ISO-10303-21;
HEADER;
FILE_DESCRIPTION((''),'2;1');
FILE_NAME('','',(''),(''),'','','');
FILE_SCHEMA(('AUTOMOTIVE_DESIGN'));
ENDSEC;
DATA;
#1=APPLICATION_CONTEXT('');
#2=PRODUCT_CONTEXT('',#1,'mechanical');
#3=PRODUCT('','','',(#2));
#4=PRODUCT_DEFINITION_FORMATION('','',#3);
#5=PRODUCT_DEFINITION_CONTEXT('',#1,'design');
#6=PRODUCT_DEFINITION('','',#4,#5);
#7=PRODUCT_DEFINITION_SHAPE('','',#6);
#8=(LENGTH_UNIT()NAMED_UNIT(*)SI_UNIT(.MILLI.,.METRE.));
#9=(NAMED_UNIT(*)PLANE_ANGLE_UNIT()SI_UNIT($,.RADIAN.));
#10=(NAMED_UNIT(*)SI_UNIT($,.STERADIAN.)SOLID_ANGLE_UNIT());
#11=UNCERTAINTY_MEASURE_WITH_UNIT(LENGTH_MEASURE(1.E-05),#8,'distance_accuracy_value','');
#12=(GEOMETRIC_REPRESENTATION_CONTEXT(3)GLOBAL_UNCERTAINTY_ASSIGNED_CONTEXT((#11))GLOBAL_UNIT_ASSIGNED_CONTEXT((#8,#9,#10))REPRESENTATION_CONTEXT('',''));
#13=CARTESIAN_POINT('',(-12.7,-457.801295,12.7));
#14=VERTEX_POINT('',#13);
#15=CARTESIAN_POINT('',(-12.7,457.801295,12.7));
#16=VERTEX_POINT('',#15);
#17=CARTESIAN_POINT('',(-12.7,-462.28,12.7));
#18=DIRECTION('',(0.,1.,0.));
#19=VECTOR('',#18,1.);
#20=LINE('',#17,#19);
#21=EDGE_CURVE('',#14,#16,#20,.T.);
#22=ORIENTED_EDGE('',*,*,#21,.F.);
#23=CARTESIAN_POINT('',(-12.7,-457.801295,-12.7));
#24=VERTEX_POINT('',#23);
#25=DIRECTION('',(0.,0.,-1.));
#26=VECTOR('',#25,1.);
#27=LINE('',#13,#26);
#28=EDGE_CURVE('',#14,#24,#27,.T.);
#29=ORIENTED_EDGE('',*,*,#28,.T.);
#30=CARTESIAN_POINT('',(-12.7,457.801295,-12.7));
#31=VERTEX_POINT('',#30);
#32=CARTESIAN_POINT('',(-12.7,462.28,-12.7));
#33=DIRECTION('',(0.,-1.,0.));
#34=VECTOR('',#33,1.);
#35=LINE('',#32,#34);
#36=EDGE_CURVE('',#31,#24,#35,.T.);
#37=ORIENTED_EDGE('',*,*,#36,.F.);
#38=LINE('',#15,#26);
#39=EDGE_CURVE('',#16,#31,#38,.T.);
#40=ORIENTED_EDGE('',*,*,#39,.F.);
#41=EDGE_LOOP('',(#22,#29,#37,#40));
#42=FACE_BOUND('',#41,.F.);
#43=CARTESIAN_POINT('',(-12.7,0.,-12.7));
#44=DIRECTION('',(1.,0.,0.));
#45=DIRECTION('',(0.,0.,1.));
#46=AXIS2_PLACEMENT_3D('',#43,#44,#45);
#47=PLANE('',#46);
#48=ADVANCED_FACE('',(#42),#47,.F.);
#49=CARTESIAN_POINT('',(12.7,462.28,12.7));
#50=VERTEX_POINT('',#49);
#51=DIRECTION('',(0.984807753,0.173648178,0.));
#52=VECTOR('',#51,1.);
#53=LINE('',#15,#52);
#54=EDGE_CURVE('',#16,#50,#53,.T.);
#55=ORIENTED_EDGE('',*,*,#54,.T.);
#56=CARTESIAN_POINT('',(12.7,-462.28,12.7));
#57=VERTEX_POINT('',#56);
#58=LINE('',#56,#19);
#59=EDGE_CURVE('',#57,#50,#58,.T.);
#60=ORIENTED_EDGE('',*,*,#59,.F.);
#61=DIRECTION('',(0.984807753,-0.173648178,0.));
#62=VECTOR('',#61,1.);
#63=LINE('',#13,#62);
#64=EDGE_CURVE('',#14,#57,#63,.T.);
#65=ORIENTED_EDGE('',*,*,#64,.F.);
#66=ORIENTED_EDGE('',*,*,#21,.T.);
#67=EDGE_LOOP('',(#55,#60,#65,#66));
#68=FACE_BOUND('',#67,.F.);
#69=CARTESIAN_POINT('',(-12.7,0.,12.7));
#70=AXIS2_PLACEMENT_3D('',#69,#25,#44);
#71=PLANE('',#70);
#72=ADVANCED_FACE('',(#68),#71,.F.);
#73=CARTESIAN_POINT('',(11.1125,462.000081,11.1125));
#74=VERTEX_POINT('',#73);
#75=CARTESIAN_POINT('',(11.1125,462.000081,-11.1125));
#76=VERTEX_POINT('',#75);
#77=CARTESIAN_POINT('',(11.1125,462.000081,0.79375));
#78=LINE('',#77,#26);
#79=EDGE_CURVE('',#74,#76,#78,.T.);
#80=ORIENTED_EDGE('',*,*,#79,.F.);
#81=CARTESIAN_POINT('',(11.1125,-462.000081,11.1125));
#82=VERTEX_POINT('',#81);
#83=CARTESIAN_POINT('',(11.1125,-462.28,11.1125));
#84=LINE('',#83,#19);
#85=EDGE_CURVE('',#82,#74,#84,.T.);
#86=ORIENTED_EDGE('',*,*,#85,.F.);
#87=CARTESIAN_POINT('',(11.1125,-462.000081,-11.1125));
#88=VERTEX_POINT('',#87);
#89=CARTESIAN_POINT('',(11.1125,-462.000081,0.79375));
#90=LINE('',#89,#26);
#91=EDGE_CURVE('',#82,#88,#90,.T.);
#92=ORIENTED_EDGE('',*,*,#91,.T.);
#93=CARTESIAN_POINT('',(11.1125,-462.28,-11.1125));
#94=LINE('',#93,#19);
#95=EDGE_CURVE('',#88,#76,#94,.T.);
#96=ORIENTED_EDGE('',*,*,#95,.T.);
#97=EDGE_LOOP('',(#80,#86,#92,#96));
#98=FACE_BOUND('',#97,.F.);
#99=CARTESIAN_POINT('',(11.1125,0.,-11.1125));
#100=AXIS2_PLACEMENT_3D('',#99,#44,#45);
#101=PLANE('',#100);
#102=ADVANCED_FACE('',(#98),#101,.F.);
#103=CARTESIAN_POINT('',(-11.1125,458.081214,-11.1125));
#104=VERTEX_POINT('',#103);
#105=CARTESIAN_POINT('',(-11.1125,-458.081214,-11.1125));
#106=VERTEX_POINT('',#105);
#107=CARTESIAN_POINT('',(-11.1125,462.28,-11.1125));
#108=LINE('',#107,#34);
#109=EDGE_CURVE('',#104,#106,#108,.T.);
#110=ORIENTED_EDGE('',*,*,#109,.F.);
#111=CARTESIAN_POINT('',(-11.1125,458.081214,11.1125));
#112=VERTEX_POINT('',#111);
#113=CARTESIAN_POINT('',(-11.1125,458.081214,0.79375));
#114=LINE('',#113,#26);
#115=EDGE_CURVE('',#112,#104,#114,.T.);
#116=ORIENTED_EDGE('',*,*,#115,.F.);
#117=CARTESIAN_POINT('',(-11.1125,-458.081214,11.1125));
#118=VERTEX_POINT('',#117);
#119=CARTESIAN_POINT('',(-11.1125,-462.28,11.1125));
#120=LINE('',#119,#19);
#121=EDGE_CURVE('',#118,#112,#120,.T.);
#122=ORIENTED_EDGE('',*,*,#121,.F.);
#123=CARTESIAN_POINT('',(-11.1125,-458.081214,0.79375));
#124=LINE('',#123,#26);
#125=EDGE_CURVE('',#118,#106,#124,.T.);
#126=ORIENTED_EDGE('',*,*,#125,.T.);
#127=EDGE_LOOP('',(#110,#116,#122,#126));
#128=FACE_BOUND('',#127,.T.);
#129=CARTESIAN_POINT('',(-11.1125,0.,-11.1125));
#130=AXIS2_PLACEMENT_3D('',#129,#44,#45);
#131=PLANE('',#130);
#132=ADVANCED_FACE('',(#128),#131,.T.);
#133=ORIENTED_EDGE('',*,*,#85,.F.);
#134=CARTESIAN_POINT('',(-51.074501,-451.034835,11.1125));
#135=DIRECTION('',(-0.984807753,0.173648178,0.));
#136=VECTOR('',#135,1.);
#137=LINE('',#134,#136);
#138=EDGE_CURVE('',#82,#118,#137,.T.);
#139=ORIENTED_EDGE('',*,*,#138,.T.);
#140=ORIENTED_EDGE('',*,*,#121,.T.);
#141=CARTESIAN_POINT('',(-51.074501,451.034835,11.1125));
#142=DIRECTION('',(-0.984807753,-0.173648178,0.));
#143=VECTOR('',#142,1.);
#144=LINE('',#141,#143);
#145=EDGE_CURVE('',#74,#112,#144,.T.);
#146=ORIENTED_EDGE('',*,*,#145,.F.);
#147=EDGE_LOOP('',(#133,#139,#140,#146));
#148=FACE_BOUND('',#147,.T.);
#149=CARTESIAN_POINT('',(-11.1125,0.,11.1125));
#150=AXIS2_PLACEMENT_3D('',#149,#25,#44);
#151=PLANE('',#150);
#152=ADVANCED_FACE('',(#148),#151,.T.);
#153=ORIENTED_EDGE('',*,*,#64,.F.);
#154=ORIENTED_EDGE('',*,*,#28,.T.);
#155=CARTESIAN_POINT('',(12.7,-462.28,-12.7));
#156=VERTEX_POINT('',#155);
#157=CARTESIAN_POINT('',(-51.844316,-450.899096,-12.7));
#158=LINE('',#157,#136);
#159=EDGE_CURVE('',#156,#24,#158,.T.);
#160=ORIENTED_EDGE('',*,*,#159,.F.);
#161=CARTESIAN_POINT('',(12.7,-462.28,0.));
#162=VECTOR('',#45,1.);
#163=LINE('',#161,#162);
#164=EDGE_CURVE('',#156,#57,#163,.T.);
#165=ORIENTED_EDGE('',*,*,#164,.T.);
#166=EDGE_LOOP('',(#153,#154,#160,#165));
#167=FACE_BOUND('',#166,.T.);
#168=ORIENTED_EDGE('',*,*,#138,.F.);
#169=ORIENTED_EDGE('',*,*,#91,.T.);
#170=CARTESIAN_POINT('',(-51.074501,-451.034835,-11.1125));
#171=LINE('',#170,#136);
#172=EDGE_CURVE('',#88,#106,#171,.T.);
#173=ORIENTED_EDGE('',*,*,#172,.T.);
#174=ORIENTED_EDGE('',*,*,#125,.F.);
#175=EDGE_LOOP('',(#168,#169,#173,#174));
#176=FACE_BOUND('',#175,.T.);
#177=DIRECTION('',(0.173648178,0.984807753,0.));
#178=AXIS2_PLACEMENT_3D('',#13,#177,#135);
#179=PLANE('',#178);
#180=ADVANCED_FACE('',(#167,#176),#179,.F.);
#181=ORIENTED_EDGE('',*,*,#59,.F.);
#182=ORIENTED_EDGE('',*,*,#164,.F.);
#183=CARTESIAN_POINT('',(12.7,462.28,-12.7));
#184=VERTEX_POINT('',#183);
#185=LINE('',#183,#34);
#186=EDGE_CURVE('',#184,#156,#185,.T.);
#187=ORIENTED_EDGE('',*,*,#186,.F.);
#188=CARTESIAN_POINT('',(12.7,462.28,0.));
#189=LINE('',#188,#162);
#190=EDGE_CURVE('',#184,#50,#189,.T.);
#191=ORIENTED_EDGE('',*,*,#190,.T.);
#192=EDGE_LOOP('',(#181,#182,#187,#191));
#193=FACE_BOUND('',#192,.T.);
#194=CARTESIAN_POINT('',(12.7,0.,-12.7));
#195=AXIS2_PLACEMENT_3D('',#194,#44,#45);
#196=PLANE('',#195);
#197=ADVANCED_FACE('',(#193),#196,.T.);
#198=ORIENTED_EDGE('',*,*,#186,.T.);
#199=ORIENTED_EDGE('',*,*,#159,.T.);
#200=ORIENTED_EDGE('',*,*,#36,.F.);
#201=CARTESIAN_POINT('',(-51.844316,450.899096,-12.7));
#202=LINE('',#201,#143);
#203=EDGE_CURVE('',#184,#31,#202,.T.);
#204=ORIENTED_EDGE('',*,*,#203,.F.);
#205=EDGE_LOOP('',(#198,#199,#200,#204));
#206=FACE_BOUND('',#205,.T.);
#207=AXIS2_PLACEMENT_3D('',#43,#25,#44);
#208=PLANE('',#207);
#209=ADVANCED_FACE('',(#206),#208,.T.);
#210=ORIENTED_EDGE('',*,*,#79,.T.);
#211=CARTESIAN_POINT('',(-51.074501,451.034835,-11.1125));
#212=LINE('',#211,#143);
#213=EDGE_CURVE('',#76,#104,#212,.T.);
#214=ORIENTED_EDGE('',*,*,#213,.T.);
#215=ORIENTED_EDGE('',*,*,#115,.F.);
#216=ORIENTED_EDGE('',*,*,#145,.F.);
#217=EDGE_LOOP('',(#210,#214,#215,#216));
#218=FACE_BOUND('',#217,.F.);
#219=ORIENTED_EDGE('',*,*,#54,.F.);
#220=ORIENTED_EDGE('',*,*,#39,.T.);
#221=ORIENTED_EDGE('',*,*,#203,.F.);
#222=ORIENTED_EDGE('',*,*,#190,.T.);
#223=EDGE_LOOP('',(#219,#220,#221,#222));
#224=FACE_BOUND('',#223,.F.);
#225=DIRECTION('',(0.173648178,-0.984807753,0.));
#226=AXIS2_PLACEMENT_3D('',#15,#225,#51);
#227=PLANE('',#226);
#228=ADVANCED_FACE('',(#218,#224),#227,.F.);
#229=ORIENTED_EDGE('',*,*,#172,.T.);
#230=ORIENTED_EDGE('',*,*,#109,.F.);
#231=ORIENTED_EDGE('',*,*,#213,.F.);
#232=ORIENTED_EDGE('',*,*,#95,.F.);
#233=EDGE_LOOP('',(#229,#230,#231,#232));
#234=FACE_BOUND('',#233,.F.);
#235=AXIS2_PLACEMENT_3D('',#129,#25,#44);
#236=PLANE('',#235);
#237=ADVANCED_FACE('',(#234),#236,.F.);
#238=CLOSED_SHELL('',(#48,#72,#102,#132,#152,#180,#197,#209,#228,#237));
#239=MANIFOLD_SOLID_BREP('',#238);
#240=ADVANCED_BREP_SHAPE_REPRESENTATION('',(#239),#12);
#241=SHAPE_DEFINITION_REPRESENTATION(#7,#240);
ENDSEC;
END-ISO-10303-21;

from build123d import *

# Parameters (mm, degrees)
F0_W     = 25.4
F0_H     = 25.4
F0_W_2   = 22.225
F0_H_2   = 22.225
F1_DEPTH = 462.28
F3_DEPTH = 25.401


# Not quite as in the source:
# - a pattern or mirror of a feature is missing from the dataset's text; its kind, count and spacing are read off the source's solid


with BuildPart() as f1:
    # F0 (on Front) → F1 (new body, symmetric)
    with BuildSketch(Plane.XZ):
        Rectangle(F0_W, F0_H)
        Rectangle(F0_W_2, F0_H_2, mode=Mode.SUBTRACT)
    extrude(amount=F1_DEPTH, both=True)

    # F2 (on face) → F3 (cut, through all)
    with BuildSketch(Plane.XY.offset(12.7)):
        Polygon((12.7, 462.28), (-12.7, 462.28), (-12.7, 457.80129469), align=None)
    f3 = extrude(amount=-F3_DEPTH, mode=Mode.SUBTRACT)

    # F3_copies: F3 across plane
    add(f3.mirror(Plane(origin=(0, 0, 0), x_dir=(0, 0, -1), z_dir=(0, -1, 0))), mode=Mode.SUBTRACT)


solid = f1.part
